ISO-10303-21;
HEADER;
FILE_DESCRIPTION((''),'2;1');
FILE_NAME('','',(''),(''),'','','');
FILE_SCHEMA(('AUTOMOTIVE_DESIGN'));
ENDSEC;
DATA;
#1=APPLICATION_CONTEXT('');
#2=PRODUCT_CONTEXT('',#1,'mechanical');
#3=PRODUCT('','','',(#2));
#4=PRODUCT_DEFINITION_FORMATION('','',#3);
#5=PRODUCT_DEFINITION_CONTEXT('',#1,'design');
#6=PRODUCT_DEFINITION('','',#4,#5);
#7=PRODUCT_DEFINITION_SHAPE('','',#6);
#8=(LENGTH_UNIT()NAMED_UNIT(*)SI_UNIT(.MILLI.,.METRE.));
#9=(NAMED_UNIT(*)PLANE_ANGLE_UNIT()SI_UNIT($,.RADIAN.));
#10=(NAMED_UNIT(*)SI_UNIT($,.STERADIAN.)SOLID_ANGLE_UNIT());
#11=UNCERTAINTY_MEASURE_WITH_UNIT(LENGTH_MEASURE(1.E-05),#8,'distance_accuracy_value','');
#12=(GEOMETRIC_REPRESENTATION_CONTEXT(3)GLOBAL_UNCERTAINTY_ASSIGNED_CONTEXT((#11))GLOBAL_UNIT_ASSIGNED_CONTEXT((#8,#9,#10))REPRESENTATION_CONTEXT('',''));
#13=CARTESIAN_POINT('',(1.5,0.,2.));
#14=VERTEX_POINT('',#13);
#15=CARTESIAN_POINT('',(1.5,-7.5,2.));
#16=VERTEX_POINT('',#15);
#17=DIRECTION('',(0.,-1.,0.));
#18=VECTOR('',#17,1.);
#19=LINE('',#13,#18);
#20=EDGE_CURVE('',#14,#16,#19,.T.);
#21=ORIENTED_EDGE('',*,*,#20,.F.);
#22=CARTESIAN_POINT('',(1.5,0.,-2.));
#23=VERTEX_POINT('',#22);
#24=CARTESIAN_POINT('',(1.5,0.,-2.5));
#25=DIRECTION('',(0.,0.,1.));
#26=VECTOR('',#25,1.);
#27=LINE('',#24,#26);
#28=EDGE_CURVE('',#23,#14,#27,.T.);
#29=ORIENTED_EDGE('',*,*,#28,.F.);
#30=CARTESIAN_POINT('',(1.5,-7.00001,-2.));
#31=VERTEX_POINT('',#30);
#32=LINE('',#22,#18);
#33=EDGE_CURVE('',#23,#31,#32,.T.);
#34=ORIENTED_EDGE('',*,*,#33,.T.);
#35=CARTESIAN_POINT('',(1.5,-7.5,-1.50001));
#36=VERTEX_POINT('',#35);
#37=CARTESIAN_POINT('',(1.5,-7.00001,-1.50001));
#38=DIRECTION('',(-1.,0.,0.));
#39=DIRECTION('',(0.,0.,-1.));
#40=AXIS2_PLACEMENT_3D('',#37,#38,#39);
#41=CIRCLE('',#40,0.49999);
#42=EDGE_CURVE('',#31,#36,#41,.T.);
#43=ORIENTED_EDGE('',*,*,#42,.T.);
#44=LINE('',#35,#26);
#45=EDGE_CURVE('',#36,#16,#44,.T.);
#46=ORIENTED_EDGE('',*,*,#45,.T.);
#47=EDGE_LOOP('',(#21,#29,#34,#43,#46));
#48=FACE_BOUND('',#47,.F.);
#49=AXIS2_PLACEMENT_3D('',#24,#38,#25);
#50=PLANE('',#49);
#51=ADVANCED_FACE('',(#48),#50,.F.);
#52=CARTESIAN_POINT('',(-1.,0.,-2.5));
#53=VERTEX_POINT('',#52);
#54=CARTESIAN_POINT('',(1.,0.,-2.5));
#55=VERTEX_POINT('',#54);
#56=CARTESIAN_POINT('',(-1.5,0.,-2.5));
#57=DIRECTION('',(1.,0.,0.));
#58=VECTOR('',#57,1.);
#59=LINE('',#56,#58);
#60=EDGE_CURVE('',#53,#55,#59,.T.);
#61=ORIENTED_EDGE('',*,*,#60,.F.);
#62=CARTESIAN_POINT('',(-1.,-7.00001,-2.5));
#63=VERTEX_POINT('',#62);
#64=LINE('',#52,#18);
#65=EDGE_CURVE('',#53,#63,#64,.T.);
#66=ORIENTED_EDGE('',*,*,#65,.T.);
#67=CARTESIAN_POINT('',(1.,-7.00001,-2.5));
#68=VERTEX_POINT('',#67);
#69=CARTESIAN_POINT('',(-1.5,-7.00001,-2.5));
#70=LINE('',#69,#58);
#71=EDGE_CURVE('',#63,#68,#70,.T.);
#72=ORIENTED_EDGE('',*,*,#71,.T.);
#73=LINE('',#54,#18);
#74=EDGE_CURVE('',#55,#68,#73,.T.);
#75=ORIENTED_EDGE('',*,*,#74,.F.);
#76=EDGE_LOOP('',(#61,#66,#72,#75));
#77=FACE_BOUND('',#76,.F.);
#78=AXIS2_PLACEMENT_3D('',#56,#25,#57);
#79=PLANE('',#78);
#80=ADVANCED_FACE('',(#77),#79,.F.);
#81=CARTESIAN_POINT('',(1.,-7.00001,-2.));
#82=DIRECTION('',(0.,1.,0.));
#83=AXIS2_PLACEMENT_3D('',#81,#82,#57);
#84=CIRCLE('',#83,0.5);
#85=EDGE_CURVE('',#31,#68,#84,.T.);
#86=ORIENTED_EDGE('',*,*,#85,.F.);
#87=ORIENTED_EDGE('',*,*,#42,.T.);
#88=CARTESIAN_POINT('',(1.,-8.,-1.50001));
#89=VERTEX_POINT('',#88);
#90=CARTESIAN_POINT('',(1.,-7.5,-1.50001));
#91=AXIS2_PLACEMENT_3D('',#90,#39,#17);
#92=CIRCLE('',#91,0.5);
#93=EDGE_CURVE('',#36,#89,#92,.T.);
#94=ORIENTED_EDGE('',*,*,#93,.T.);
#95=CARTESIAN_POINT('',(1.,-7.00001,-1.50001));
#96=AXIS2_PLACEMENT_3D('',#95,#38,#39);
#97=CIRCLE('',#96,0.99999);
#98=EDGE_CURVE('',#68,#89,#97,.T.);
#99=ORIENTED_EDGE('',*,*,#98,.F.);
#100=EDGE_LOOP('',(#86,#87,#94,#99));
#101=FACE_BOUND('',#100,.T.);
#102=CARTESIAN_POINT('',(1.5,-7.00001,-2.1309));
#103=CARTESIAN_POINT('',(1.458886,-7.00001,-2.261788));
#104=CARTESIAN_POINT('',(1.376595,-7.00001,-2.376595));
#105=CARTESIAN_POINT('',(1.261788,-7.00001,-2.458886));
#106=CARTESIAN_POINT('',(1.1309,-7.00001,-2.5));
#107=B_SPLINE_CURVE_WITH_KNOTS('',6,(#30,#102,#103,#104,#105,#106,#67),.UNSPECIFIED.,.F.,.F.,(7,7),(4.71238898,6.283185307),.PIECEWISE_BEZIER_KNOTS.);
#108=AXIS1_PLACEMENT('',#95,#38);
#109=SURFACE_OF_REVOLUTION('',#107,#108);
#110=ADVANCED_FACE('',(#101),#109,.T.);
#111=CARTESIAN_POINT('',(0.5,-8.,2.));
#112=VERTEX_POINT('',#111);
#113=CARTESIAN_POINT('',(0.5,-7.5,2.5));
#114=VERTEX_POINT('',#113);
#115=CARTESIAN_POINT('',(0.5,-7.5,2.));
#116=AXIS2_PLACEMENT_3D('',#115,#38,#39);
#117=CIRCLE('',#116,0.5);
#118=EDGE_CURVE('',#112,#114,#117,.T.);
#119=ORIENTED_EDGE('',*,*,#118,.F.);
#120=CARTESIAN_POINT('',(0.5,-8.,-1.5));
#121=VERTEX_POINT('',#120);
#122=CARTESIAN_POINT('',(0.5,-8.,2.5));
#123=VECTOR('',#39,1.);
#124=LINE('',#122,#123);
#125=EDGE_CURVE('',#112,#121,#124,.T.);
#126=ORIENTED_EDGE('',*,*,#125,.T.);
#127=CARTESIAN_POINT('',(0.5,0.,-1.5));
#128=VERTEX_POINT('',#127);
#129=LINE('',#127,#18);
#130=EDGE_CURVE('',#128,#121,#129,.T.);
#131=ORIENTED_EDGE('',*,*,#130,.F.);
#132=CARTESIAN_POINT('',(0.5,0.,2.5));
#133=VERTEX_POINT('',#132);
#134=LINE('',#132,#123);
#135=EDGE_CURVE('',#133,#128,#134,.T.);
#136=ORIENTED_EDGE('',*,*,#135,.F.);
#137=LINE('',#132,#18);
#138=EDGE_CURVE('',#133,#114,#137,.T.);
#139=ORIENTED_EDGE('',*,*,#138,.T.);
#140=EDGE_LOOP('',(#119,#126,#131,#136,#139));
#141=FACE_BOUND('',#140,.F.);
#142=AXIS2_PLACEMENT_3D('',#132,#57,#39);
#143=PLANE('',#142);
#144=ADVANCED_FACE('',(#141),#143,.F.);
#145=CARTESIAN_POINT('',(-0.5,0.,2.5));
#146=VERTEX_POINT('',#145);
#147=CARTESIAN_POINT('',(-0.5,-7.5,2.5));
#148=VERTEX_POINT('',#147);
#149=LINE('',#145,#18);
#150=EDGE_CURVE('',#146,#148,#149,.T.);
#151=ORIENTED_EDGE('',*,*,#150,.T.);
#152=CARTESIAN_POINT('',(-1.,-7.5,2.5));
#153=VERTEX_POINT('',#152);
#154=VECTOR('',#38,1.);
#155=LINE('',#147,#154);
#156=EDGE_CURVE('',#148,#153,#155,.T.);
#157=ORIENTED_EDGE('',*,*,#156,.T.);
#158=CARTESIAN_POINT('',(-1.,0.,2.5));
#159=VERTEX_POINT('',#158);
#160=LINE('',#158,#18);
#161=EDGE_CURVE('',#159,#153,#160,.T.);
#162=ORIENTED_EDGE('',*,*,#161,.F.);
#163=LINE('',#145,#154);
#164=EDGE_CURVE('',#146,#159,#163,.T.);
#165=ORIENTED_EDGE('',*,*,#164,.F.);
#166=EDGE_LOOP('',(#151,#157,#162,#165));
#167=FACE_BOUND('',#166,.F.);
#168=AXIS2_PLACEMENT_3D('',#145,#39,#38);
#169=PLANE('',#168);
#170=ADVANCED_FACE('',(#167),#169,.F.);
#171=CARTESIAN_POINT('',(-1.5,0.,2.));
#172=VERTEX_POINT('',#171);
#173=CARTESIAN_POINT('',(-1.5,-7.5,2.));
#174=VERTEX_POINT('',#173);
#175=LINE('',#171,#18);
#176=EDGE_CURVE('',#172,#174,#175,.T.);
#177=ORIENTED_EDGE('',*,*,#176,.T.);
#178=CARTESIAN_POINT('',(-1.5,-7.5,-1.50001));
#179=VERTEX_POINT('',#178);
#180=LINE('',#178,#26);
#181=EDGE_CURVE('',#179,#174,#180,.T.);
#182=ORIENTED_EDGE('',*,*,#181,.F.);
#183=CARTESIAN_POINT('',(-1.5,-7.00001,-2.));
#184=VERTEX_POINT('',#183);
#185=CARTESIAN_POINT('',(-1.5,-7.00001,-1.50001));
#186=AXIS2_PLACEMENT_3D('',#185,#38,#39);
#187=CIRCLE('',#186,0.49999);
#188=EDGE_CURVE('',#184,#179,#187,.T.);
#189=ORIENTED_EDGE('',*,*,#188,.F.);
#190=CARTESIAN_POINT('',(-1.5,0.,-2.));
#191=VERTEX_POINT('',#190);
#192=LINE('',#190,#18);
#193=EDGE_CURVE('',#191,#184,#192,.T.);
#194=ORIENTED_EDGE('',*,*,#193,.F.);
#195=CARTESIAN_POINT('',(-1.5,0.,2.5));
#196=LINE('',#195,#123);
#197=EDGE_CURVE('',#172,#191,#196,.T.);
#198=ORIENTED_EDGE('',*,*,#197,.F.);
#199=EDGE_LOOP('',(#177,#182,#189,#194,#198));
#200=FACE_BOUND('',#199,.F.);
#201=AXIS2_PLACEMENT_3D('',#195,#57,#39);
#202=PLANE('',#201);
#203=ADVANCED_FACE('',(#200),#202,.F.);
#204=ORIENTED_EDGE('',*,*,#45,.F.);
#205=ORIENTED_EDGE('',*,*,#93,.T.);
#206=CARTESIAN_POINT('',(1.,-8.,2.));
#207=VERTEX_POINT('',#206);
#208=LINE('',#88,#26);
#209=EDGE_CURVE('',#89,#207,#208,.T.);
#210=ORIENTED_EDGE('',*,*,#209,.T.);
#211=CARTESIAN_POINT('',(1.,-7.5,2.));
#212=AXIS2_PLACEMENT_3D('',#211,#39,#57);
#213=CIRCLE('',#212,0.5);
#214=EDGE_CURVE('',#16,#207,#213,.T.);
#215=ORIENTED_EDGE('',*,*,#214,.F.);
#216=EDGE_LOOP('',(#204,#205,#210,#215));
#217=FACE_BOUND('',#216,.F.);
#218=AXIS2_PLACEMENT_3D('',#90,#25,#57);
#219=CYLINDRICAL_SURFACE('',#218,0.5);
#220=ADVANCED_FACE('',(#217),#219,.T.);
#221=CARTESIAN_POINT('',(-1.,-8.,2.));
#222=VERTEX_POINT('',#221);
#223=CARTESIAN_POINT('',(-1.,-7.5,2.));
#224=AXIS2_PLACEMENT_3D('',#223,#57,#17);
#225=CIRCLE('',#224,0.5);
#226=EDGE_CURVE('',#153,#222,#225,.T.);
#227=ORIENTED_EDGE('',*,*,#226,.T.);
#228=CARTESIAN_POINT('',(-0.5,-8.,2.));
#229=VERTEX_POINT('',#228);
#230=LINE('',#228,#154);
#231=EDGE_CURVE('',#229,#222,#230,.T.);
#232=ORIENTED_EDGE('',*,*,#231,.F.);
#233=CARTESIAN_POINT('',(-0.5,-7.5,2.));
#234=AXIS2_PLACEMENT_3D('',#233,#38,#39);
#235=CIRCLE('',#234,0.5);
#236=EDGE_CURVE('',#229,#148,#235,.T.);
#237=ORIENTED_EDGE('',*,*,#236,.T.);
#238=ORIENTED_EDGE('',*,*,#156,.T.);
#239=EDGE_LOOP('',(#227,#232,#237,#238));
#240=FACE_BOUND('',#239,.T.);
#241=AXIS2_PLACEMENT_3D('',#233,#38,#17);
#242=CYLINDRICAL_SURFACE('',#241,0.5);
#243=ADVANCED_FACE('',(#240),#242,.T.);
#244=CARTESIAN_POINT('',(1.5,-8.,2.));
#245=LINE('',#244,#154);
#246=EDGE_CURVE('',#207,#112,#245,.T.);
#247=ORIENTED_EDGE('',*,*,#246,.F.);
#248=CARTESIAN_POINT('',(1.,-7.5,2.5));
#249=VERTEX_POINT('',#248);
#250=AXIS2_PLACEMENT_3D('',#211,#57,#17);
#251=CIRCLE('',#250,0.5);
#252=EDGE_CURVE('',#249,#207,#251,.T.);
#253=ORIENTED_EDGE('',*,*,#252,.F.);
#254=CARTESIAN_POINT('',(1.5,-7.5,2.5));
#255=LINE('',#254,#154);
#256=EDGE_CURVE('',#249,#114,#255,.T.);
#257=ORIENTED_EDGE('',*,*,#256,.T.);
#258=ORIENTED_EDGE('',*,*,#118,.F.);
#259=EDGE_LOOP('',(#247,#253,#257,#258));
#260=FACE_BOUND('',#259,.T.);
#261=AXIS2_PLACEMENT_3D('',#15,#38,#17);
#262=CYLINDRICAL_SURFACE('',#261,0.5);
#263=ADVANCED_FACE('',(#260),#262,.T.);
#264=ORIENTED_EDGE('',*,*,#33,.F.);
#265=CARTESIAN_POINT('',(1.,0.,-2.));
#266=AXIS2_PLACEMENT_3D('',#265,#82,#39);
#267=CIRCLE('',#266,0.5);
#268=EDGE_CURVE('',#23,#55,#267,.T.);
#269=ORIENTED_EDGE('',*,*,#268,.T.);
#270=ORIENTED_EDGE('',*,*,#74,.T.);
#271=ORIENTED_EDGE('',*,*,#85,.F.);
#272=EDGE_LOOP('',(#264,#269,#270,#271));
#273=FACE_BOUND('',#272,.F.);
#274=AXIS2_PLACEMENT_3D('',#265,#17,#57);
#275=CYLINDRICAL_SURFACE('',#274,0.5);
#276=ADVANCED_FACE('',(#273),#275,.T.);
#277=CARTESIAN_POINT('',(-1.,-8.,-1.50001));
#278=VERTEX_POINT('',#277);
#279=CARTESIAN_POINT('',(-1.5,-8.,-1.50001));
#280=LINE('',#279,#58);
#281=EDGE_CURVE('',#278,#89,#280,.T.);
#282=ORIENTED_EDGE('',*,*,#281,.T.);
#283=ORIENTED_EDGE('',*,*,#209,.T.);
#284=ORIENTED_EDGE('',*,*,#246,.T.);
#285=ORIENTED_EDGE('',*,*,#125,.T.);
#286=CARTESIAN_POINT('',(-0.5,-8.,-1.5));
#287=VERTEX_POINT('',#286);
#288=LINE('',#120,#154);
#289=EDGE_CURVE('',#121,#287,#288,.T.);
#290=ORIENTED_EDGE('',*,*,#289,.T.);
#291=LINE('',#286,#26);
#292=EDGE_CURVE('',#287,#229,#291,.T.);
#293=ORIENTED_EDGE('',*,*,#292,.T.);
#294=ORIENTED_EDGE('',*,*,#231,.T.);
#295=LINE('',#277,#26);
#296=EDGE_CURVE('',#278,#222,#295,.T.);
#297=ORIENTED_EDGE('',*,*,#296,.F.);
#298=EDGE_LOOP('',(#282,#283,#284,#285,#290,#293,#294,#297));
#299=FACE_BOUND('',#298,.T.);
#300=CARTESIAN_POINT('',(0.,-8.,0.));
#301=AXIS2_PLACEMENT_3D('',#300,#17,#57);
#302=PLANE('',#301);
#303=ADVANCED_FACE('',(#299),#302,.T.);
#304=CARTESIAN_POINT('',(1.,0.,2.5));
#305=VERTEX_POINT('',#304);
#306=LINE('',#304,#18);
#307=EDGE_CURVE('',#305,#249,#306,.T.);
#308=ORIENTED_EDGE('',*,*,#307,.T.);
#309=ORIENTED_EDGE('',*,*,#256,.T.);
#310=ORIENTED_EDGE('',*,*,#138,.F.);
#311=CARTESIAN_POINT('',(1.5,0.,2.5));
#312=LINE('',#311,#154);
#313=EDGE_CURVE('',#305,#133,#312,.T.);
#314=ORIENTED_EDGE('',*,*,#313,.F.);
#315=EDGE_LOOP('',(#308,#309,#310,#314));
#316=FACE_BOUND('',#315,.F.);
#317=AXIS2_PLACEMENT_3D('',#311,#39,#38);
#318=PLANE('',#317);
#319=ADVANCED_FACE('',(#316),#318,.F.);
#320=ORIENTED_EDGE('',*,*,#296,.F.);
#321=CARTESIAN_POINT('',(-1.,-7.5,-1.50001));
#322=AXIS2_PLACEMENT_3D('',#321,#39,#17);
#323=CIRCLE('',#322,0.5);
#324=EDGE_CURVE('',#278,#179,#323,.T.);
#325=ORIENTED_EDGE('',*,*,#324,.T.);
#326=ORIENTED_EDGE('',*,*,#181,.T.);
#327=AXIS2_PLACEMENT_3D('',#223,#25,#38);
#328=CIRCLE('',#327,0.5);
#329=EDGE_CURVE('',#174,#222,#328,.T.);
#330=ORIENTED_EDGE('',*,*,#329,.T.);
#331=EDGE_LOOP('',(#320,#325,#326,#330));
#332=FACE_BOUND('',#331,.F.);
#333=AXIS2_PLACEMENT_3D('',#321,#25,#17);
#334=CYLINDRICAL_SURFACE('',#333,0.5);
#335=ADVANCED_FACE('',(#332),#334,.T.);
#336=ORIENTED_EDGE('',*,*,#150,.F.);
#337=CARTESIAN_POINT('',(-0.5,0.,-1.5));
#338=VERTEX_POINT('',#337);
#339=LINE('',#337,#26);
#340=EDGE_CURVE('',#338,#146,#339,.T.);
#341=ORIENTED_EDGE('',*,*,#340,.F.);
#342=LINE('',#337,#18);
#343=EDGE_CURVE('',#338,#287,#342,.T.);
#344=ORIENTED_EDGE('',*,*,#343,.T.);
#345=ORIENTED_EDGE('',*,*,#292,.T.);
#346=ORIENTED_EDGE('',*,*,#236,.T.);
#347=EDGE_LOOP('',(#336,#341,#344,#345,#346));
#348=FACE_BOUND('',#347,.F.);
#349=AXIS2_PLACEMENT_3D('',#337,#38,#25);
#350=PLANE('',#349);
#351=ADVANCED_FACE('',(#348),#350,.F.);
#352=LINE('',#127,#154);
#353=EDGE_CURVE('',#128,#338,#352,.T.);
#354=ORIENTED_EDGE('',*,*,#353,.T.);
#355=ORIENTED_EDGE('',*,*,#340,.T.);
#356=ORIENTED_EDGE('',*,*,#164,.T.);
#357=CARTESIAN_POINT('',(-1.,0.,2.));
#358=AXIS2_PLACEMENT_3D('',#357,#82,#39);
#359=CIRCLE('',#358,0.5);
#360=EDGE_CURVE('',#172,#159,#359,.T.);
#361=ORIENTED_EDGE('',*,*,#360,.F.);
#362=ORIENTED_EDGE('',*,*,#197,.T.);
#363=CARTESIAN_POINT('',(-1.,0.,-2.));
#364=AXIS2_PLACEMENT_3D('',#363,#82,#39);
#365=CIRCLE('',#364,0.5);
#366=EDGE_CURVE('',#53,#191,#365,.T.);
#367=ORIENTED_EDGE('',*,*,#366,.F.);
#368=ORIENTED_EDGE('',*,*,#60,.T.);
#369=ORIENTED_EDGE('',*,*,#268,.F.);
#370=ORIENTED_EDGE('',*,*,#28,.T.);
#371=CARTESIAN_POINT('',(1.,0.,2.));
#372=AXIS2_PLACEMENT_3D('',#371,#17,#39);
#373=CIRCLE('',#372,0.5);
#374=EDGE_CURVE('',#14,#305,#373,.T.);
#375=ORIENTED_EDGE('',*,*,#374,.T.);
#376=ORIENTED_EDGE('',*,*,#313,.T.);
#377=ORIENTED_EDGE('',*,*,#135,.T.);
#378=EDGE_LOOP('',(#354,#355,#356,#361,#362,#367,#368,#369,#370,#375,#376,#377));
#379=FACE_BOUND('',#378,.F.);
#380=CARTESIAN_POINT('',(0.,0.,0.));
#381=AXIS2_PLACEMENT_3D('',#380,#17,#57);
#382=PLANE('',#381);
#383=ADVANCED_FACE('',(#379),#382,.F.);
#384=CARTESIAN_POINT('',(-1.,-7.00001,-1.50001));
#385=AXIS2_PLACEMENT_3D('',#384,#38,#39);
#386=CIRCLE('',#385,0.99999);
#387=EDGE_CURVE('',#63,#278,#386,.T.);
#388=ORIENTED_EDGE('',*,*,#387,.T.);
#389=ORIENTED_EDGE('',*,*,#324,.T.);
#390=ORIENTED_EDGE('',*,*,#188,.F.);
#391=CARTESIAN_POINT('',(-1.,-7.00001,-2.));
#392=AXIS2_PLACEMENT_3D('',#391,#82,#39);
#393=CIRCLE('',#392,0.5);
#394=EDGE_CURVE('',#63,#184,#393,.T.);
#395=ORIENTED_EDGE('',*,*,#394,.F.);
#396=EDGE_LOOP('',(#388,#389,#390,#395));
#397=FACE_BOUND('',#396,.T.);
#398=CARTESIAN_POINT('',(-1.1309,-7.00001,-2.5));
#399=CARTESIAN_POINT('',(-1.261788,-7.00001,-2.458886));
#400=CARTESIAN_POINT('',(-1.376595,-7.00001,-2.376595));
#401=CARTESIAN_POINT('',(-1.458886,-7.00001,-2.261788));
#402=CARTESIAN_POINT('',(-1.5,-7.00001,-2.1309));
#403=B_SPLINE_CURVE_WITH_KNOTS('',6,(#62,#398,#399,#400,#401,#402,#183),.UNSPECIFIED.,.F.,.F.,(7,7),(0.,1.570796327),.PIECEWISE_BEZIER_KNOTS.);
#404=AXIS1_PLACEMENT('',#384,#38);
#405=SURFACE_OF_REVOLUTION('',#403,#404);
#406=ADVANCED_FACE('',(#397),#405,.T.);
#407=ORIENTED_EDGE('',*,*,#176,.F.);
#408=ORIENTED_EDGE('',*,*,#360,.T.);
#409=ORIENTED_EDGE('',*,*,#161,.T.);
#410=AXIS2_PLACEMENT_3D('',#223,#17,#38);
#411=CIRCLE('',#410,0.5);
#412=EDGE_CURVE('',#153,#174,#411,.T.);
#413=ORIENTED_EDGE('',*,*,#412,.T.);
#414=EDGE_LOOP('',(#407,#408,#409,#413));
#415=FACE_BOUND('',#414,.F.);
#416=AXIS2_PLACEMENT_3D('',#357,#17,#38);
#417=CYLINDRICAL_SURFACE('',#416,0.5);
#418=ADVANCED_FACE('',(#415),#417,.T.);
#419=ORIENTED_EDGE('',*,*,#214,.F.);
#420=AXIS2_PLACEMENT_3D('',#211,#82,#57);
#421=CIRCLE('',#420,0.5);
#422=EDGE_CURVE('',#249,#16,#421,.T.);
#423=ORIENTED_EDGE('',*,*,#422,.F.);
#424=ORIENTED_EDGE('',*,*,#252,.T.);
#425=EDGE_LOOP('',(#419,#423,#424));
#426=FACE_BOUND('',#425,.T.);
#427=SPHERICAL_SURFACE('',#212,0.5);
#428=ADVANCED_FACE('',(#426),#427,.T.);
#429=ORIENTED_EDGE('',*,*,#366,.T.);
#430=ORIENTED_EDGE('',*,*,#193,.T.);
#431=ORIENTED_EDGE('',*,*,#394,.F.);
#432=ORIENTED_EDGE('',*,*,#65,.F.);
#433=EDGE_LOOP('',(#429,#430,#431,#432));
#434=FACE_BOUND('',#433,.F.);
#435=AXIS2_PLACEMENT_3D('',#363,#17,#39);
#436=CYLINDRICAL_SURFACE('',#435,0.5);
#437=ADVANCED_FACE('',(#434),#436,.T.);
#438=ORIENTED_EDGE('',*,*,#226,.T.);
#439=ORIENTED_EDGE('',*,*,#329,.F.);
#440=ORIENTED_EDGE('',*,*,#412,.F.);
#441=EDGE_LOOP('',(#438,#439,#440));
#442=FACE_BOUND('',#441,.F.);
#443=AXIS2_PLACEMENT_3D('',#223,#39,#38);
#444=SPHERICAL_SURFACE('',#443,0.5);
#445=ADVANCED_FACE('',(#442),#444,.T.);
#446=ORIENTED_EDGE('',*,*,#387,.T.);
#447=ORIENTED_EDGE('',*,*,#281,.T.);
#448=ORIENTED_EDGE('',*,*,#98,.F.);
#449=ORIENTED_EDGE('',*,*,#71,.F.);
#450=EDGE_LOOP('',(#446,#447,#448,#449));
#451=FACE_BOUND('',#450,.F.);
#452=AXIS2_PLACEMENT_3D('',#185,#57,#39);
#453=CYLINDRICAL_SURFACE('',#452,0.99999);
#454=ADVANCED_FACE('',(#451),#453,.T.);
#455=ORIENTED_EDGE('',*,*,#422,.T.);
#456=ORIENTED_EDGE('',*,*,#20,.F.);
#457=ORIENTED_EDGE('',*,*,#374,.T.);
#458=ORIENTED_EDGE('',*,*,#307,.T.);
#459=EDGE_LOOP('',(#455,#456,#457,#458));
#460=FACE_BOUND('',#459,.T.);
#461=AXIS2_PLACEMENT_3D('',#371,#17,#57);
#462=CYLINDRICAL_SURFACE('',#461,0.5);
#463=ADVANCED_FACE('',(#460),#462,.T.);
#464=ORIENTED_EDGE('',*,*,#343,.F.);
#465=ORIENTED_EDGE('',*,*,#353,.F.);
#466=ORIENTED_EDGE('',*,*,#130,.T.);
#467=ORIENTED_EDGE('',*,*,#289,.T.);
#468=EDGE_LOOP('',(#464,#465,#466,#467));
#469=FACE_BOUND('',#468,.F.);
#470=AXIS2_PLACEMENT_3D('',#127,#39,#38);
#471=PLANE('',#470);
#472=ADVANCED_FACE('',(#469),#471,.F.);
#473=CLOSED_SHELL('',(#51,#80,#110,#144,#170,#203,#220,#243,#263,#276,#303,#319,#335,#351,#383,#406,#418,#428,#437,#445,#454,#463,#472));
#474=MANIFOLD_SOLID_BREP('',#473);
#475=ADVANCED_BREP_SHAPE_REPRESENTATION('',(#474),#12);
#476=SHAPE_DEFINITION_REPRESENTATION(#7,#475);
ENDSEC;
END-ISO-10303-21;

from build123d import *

# Parameters (mm, degrees)
F1_DEPTH = 8
F2_R     = 0.99999
F3_R     = 0.5


# Not quite as in the source:
# - a fillet or chamfer is up to 0.001 mm smaller than in the source, because OpenCascade refuses the exact size


with BuildPart() as f1:
    # F0 (on Front) → F1 (new body)
    with BuildSketch(Plane.XZ):
        Polygon((1.5, -2.5), (1.5, 2.5), (0.5, 2.5), (0.5, -1.5), (-0.5, -1.5), (-0.5, 2.5), (-1.5, 2.5), (-1.5, -2.5), align=None)
    extrude(amount=F1_DEPTH)

    # F2 (radius 1 in the source; OpenCascade refuses exactly that, so slightly less here)
    f2_edges = [f1.edges().sort_by_distance(p)[0] for p in [
        (0, -8, -2.5),
    ]]
    fillet(f2_edges, radius=F2_R)

    # F3
    f3_edges = [f1.edges().sort_by_distance(p)[0] for p in [
        (-1.5, -3.500005, -2.5),
        (1.5, -3.500005, -2.5),
        (1.5, -4, 2.5),
        (-1.5, -4, 2.5),
        (-1, -8, 2.5),
        (1, -8, 2.5),
    ]]
    fillet(f3_edges, radius=F3_R)


solid = f1.part
